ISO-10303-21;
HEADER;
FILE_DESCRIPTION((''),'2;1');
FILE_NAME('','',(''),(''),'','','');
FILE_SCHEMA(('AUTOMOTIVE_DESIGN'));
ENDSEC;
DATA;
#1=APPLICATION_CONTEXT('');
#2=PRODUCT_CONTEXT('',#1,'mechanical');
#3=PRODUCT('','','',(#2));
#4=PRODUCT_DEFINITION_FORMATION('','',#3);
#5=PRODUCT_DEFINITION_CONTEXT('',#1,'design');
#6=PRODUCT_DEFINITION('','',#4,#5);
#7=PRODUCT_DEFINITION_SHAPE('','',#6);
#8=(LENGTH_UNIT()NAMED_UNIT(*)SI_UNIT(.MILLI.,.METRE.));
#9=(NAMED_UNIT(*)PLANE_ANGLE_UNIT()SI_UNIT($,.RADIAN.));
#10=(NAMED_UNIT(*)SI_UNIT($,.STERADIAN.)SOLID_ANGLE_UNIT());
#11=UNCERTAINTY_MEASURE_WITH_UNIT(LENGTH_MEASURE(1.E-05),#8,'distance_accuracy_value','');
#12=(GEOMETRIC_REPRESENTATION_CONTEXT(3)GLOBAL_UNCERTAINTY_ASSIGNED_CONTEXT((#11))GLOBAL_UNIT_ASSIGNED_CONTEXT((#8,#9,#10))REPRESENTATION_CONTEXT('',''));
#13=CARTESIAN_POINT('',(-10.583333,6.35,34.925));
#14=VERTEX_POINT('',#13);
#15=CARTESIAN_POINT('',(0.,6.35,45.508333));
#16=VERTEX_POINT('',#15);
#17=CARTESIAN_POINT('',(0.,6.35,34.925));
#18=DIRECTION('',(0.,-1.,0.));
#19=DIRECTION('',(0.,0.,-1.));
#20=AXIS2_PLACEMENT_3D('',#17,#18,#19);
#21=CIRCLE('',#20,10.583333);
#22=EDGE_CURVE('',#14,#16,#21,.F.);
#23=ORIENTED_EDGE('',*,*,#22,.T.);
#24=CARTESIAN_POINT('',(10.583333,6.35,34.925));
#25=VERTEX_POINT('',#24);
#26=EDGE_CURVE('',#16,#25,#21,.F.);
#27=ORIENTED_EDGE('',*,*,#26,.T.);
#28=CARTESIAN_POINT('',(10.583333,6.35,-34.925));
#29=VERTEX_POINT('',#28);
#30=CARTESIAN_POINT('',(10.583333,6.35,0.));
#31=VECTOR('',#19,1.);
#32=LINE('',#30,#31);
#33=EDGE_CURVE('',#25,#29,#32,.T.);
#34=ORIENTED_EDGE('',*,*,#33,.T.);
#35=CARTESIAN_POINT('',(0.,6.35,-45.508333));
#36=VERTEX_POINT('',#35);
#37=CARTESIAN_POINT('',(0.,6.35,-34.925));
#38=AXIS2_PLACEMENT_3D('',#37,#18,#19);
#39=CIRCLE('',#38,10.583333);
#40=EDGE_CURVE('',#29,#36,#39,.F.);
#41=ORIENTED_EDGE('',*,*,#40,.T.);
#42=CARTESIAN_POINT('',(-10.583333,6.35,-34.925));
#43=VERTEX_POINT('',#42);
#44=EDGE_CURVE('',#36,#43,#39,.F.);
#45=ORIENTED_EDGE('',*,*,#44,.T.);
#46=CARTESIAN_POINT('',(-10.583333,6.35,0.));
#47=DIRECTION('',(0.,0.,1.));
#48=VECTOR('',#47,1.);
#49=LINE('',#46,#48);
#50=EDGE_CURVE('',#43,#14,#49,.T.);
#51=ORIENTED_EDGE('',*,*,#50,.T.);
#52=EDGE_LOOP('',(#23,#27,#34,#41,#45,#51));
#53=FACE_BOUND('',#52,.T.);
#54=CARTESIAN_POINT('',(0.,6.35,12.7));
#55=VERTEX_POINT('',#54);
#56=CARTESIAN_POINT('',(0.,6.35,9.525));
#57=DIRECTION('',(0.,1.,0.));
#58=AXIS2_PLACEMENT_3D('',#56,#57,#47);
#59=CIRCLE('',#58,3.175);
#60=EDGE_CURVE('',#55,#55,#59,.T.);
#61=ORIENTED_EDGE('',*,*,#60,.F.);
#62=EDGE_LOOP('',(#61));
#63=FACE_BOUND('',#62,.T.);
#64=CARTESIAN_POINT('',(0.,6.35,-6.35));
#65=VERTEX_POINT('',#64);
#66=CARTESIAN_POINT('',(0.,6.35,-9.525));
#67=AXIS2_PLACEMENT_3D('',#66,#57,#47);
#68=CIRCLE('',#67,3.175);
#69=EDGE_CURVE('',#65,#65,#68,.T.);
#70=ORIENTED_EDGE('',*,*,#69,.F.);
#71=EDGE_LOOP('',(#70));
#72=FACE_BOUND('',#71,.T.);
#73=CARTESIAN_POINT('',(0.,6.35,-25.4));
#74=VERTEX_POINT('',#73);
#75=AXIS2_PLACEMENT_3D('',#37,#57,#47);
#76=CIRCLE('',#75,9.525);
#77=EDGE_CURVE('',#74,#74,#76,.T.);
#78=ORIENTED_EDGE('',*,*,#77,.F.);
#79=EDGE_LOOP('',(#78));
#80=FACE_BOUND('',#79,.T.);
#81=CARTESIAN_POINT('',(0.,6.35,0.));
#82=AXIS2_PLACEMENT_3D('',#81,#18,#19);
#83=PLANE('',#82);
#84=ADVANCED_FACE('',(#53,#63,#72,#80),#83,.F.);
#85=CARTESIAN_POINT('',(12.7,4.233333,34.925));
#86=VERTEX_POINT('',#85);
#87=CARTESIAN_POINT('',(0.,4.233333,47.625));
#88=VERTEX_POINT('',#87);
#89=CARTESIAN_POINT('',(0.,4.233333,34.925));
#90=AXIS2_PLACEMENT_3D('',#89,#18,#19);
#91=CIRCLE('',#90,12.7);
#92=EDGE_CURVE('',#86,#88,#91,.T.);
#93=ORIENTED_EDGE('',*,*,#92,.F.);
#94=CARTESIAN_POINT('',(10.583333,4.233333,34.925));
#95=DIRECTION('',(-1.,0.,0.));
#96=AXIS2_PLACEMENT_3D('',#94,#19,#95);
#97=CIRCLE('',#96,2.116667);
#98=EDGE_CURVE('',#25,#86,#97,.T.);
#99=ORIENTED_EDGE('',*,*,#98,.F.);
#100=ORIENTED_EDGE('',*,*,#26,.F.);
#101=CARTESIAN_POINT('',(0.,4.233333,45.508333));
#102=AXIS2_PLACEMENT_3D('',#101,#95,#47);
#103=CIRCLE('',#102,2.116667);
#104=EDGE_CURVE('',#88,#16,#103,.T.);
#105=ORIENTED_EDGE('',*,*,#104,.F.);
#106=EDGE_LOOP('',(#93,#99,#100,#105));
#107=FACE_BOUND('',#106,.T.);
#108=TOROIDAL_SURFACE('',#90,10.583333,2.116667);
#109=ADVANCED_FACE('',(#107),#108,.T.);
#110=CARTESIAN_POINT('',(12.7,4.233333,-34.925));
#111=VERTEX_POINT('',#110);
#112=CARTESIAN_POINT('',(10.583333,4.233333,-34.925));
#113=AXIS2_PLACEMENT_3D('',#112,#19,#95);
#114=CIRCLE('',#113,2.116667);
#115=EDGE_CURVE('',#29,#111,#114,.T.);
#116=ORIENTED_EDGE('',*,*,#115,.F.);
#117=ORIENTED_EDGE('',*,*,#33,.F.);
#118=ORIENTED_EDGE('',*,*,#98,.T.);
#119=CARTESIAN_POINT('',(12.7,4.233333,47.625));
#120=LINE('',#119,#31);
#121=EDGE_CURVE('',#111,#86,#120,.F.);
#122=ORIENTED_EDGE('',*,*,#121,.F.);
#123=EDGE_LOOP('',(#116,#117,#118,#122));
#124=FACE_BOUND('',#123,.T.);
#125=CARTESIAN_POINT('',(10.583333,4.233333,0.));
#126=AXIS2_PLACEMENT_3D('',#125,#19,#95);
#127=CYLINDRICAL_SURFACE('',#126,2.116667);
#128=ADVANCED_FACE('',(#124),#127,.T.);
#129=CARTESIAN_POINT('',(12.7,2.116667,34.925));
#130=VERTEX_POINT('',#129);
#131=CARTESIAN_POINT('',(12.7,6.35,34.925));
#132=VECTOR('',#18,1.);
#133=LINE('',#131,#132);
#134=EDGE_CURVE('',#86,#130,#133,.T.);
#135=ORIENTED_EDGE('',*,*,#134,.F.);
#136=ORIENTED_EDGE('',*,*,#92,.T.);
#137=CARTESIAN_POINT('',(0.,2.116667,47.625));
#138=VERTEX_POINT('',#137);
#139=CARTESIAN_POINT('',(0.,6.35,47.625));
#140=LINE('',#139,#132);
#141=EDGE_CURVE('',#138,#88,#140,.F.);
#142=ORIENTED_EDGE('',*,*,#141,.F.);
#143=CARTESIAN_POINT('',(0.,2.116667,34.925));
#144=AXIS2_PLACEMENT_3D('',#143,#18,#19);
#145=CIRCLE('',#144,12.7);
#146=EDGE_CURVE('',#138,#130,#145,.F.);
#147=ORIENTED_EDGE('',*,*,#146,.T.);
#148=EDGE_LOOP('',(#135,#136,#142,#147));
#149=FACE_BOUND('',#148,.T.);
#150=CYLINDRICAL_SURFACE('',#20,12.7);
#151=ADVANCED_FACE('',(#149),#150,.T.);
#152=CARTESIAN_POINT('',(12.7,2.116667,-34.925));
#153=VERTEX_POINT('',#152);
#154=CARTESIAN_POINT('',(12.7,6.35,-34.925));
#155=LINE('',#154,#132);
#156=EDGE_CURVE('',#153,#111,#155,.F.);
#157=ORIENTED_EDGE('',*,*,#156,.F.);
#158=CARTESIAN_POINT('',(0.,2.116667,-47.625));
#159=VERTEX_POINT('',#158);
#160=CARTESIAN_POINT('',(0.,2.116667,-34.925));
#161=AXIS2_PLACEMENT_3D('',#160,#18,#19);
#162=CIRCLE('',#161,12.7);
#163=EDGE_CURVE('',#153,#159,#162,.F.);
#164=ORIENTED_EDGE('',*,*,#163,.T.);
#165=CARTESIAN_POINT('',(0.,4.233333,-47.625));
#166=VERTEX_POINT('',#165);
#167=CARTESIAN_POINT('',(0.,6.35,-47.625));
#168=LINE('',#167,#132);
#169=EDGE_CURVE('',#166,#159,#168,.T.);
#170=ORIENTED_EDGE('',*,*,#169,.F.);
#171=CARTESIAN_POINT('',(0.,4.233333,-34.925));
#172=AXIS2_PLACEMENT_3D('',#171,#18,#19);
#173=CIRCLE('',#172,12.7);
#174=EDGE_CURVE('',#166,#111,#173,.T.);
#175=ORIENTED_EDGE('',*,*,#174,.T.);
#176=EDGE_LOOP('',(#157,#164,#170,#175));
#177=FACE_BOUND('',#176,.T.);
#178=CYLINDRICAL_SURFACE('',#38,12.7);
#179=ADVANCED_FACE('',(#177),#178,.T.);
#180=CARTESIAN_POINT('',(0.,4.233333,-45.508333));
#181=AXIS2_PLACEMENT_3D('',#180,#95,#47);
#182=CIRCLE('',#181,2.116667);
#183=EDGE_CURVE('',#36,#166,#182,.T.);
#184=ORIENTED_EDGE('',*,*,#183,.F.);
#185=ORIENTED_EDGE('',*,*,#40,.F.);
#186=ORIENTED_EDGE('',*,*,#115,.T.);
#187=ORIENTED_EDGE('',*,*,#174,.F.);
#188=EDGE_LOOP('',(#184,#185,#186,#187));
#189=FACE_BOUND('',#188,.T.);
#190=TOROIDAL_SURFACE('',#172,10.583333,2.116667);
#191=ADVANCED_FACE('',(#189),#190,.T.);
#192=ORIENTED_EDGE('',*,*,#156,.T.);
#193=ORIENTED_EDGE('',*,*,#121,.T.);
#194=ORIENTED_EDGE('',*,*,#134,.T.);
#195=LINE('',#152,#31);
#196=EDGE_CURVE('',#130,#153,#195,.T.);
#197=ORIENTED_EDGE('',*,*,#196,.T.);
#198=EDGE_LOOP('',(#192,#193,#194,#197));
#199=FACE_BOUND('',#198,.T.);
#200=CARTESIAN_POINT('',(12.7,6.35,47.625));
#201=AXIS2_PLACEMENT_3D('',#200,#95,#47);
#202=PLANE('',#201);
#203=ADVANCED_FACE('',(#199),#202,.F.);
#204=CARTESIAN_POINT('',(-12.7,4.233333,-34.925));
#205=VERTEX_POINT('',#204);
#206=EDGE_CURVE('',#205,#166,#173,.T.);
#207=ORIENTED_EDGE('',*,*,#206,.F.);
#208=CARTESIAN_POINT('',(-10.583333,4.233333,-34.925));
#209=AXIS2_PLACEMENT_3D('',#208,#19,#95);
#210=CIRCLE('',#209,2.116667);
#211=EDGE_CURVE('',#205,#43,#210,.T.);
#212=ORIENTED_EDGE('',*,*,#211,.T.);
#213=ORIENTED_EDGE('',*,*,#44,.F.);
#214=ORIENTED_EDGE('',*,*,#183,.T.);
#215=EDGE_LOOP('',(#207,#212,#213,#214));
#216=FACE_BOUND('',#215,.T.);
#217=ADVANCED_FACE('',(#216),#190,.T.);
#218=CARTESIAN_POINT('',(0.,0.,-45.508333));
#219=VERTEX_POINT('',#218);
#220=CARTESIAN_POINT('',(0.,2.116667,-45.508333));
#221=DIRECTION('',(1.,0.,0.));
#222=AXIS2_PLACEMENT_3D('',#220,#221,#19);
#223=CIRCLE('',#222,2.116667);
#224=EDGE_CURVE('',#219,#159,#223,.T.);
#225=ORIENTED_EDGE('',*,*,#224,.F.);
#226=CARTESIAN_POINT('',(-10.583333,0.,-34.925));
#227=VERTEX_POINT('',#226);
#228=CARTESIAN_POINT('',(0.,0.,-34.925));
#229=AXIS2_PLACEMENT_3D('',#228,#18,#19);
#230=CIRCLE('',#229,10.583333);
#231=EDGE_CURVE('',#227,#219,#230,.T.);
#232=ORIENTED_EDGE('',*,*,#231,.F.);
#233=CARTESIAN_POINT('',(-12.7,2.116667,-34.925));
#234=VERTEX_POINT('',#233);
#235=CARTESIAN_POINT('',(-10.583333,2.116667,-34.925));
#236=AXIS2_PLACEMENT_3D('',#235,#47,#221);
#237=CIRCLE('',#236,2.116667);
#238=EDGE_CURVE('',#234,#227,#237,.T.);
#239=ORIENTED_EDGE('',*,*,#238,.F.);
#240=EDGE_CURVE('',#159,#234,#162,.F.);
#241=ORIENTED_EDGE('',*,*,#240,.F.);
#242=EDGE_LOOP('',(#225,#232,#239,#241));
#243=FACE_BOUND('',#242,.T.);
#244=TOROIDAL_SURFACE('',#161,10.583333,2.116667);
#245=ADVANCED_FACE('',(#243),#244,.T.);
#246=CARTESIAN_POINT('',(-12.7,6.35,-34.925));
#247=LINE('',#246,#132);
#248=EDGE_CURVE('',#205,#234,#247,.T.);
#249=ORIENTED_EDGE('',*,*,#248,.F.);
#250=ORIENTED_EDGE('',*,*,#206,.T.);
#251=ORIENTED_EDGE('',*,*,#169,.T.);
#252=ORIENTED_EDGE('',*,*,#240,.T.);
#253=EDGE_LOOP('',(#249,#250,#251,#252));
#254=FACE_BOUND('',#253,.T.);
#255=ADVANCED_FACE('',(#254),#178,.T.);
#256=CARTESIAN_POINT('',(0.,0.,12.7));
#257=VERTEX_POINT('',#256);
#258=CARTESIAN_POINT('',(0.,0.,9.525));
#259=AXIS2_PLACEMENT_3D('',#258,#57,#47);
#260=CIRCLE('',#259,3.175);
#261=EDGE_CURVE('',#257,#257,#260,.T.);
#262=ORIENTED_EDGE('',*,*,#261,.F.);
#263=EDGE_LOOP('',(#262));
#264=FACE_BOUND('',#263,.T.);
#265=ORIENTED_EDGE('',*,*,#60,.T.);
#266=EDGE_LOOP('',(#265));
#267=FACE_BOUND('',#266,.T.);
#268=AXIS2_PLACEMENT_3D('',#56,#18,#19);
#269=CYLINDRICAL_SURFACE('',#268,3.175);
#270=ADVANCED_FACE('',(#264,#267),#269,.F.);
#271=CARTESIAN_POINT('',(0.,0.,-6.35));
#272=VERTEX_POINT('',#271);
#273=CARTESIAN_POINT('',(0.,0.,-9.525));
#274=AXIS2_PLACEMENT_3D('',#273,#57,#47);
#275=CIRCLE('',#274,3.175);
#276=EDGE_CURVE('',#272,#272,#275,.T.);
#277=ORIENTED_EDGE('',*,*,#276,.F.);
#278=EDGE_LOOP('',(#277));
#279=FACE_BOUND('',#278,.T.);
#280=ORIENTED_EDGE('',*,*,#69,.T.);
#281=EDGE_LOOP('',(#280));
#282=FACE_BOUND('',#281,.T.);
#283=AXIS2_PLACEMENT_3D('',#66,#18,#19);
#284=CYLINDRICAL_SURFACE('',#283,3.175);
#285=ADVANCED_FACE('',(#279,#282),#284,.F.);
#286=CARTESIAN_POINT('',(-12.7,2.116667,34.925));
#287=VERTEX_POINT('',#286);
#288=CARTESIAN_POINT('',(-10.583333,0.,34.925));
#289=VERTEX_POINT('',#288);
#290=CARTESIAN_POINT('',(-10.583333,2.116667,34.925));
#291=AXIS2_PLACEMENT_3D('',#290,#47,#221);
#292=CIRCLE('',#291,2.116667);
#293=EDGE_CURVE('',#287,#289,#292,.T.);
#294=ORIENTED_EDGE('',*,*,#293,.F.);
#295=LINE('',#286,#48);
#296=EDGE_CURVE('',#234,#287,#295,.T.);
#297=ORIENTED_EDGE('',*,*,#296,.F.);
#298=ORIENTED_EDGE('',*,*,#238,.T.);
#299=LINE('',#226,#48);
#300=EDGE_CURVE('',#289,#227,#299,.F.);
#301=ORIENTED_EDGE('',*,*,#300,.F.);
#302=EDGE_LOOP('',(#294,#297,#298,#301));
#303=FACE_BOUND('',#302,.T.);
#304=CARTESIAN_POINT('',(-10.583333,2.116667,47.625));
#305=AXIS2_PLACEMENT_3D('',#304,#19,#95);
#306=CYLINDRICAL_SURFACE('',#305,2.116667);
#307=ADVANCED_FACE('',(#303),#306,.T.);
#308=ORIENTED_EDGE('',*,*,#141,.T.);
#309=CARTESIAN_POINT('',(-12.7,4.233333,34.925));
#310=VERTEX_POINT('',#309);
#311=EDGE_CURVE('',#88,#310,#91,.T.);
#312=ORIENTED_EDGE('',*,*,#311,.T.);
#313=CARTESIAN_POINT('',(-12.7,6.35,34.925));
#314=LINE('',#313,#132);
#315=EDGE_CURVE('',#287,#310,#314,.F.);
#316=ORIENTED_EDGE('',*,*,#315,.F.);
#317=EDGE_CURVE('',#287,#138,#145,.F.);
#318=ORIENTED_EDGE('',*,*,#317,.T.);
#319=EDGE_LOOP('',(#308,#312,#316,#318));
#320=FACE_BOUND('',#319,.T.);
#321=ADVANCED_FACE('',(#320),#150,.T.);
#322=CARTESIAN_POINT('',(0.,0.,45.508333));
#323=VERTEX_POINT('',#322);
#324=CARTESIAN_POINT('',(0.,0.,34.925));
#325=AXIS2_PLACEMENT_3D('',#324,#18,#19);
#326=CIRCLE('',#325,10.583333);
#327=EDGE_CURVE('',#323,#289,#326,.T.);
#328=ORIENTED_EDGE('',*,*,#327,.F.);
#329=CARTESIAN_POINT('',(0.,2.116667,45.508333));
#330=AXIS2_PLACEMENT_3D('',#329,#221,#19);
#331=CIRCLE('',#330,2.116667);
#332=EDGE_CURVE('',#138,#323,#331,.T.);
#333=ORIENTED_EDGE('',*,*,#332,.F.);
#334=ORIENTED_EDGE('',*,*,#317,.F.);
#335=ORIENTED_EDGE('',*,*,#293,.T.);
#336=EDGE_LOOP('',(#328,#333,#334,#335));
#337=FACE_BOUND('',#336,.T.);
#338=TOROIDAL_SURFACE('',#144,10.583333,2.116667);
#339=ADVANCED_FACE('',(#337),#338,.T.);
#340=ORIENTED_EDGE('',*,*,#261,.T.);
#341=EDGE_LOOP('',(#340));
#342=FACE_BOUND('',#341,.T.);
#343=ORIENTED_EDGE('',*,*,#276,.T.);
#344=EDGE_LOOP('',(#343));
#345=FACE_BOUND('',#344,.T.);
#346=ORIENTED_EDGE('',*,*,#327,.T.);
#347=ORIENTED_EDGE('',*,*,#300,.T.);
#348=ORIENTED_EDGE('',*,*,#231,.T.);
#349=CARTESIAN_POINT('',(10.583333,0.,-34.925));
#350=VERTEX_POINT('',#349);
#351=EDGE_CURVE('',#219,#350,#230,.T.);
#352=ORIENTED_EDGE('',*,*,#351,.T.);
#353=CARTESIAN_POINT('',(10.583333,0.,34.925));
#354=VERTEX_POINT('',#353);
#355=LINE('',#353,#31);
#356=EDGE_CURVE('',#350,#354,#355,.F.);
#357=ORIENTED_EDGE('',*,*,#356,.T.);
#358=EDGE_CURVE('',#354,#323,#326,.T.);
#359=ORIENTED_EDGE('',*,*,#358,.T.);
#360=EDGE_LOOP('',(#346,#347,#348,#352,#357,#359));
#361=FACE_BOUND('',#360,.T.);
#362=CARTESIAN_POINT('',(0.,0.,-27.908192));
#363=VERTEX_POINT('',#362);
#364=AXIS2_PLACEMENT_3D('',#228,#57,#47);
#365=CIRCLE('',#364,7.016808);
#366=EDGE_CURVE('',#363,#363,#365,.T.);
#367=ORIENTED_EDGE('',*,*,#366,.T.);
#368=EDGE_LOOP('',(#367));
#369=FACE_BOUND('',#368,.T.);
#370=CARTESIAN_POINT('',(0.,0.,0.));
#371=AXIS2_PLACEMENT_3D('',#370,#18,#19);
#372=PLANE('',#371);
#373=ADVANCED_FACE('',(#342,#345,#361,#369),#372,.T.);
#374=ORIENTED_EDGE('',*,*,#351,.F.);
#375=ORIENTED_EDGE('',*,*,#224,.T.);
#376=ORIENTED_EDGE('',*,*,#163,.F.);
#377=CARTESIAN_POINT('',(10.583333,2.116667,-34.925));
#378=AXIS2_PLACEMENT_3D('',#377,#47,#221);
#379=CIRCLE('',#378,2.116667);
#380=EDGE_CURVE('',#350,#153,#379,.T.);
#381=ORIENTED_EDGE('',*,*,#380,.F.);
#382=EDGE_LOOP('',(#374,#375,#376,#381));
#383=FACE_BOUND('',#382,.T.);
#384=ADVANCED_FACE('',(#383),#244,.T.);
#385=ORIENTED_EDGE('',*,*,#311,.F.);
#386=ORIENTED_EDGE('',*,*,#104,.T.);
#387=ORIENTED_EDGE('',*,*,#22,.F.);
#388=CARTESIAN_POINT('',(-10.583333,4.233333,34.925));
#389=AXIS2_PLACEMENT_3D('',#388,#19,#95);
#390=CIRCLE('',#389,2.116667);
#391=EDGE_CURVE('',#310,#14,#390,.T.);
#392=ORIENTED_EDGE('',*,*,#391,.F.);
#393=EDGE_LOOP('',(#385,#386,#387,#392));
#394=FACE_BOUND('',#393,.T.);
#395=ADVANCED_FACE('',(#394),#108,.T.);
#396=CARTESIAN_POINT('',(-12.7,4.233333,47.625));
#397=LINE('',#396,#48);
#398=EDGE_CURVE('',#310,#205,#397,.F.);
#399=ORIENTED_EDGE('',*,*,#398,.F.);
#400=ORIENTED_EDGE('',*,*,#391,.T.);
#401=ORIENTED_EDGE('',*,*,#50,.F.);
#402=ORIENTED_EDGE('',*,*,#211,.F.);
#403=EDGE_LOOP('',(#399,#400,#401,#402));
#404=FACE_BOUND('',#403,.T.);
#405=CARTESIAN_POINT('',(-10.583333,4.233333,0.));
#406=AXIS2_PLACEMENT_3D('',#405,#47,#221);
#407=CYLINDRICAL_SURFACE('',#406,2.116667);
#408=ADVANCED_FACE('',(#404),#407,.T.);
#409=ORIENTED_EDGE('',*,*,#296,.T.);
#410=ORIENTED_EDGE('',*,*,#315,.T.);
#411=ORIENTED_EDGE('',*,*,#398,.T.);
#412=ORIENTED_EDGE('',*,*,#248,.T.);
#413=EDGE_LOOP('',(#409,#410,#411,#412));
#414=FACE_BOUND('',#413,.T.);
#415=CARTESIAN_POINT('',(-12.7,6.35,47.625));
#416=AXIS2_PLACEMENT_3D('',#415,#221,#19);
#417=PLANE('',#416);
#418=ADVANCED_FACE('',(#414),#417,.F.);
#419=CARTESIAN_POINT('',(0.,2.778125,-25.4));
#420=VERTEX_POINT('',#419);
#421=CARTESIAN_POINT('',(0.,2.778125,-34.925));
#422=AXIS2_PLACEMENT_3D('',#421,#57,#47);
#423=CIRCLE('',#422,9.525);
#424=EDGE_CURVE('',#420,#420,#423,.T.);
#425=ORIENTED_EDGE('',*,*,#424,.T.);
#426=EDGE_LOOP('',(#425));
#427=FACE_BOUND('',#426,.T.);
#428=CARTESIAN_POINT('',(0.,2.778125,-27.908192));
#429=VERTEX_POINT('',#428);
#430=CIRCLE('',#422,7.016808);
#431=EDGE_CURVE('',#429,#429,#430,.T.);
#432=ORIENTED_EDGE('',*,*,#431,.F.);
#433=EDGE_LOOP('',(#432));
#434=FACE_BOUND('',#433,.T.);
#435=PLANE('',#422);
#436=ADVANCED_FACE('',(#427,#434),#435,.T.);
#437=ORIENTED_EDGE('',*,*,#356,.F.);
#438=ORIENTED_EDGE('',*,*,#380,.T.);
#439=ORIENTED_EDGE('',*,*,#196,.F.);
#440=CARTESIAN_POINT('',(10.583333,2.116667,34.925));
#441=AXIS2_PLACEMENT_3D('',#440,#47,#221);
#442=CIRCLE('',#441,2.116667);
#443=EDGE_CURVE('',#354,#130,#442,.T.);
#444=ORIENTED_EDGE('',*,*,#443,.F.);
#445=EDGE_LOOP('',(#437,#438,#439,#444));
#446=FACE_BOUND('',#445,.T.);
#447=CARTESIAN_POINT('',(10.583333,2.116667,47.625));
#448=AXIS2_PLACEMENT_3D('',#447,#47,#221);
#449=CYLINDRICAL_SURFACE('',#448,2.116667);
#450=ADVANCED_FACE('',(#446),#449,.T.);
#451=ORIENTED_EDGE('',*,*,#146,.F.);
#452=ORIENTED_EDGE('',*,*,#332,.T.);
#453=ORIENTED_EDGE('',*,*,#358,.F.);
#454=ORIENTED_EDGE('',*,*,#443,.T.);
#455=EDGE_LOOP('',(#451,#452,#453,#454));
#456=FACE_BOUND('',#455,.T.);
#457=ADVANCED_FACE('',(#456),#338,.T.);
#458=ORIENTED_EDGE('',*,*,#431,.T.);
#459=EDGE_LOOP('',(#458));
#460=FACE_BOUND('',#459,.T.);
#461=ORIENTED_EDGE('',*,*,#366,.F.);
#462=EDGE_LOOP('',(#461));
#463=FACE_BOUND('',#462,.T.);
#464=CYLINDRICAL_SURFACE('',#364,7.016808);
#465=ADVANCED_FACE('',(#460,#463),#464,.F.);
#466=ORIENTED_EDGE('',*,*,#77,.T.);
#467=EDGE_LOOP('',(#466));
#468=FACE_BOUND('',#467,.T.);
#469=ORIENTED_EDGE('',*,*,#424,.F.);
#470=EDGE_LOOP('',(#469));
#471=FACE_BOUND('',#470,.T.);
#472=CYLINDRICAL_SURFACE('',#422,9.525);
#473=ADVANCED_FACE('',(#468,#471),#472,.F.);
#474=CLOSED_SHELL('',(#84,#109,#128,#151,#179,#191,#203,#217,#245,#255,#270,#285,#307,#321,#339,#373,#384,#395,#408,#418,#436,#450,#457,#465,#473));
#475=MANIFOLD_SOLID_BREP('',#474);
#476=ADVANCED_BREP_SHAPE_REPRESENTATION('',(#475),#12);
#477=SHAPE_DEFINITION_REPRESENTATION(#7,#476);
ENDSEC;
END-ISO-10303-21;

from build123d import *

# Parameters (mm, degrees)
SKETCH1_W           = 25.4
SKETCH1_H           = 95.25
SKETCH1_R           = 3.175
BOSS_EXTRUDE1_DEPTH = 6.35
FILLET1_R           = 12.7
FILLET2_R           = 2.116666667
SKETCH5_R           = 9.525
SKETCH5_R_2         = 7.016807895
CUT_EXTRUDE2_DEPTH  = 3.571875
SKETCH5_2_R         = 7.016807895
CUT_EXTRUDE3_DEPTH  = 6.35


with BuildPart() as part:
    # Sketch1 → Boss-Extrude1 (new body)
    with BuildSketch(Plane(origin=(0, 0, 0), x_dir=(1, 0, 0), z_dir=(0, 1, 0))):
        Rectangle(SKETCH1_W, SKETCH1_H)
        with Locations(Location((0, 9.525, 0), (0, 0, 270))):
            Circle(SKETCH1_R, mode=Mode.SUBTRACT)
        with Locations(Location((0, -9.525, 0), (0, 0, 270))):
            Circle(SKETCH1_R, mode=Mode.SUBTRACT)
    extrude(amount=BOSS_EXTRUDE1_DEPTH)

    # Fillet1
    fillet1_edges = [part.edges().sort_by_distance(p)[0] for p in [
        (-12.7, 3.175, -47.625),
        (12.7, 3.175, -47.625),
        (-12.7, 3.175, 47.625),
        (12.7, 3.175, 47.625),
    ]]
    fillet(fillet1_edges, radius=FILLET1_R - 0.0001)  # a hair under: the kernel refuses the full size

    # Fillet2
    fillet2_edges = [part.edges().sort_by_distance(p)[0] for p in [
        (-12.7, 0, 0),
        (-12.7, 6.35, 0),
        (12.7, 0, 0),
        (8.98028541, 0, 43.90528541),
        (-8.98028541, 0, 43.90528541),
        (8.98028541, 0, -43.90528541),
        (-8.98028541, 0, -43.90528541),
        (12.7, 6.35, 0),
        (8.98028541, 6.35, 43.90528541),
        (-8.98028541, 6.35, 43.90528541),
        (8.98028541, 6.35, -43.90528541),
        (-8.98028541, 6.35, -43.90528541),
    ]]
    fillet(fillet2_edges, radius=FILLET2_R)

    # Sketch5 → Cut-Extrude2 (cut)
    with BuildSketch(Plane(origin=(0, 6.35, 0), x_dir=(1, 0, 0), z_dir=(0, 1, 0))):
        with Locations(Location((0, 34.925, 0), (0, 0, 270))):
            Circle(SKETCH5_R)
        with Locations(Location((0, 34.925, 0), (0, 0, 270))):
            Circle(SKETCH5_R_2, mode=Mode.SUBTRACT)
    extrude(amount=-CUT_EXTRUDE2_DEPTH, mode=Mode.SUBTRACT)

    # Sketch5<2> → Cut-Extrude3 (cut)
    with BuildSketch(Plane(origin=(0, 6.35, 0), x_dir=(1, 0, 0), z_dir=(0, 1, 0))):
        with Locations(Location((0, 34.925, 0), (0, 0, 270))):
            Circle(SKETCH5_2_R)
    extrude(amount=-CUT_EXTRUDE3_DEPTH, mode=Mode.SUBTRACT)


solid = part.part
